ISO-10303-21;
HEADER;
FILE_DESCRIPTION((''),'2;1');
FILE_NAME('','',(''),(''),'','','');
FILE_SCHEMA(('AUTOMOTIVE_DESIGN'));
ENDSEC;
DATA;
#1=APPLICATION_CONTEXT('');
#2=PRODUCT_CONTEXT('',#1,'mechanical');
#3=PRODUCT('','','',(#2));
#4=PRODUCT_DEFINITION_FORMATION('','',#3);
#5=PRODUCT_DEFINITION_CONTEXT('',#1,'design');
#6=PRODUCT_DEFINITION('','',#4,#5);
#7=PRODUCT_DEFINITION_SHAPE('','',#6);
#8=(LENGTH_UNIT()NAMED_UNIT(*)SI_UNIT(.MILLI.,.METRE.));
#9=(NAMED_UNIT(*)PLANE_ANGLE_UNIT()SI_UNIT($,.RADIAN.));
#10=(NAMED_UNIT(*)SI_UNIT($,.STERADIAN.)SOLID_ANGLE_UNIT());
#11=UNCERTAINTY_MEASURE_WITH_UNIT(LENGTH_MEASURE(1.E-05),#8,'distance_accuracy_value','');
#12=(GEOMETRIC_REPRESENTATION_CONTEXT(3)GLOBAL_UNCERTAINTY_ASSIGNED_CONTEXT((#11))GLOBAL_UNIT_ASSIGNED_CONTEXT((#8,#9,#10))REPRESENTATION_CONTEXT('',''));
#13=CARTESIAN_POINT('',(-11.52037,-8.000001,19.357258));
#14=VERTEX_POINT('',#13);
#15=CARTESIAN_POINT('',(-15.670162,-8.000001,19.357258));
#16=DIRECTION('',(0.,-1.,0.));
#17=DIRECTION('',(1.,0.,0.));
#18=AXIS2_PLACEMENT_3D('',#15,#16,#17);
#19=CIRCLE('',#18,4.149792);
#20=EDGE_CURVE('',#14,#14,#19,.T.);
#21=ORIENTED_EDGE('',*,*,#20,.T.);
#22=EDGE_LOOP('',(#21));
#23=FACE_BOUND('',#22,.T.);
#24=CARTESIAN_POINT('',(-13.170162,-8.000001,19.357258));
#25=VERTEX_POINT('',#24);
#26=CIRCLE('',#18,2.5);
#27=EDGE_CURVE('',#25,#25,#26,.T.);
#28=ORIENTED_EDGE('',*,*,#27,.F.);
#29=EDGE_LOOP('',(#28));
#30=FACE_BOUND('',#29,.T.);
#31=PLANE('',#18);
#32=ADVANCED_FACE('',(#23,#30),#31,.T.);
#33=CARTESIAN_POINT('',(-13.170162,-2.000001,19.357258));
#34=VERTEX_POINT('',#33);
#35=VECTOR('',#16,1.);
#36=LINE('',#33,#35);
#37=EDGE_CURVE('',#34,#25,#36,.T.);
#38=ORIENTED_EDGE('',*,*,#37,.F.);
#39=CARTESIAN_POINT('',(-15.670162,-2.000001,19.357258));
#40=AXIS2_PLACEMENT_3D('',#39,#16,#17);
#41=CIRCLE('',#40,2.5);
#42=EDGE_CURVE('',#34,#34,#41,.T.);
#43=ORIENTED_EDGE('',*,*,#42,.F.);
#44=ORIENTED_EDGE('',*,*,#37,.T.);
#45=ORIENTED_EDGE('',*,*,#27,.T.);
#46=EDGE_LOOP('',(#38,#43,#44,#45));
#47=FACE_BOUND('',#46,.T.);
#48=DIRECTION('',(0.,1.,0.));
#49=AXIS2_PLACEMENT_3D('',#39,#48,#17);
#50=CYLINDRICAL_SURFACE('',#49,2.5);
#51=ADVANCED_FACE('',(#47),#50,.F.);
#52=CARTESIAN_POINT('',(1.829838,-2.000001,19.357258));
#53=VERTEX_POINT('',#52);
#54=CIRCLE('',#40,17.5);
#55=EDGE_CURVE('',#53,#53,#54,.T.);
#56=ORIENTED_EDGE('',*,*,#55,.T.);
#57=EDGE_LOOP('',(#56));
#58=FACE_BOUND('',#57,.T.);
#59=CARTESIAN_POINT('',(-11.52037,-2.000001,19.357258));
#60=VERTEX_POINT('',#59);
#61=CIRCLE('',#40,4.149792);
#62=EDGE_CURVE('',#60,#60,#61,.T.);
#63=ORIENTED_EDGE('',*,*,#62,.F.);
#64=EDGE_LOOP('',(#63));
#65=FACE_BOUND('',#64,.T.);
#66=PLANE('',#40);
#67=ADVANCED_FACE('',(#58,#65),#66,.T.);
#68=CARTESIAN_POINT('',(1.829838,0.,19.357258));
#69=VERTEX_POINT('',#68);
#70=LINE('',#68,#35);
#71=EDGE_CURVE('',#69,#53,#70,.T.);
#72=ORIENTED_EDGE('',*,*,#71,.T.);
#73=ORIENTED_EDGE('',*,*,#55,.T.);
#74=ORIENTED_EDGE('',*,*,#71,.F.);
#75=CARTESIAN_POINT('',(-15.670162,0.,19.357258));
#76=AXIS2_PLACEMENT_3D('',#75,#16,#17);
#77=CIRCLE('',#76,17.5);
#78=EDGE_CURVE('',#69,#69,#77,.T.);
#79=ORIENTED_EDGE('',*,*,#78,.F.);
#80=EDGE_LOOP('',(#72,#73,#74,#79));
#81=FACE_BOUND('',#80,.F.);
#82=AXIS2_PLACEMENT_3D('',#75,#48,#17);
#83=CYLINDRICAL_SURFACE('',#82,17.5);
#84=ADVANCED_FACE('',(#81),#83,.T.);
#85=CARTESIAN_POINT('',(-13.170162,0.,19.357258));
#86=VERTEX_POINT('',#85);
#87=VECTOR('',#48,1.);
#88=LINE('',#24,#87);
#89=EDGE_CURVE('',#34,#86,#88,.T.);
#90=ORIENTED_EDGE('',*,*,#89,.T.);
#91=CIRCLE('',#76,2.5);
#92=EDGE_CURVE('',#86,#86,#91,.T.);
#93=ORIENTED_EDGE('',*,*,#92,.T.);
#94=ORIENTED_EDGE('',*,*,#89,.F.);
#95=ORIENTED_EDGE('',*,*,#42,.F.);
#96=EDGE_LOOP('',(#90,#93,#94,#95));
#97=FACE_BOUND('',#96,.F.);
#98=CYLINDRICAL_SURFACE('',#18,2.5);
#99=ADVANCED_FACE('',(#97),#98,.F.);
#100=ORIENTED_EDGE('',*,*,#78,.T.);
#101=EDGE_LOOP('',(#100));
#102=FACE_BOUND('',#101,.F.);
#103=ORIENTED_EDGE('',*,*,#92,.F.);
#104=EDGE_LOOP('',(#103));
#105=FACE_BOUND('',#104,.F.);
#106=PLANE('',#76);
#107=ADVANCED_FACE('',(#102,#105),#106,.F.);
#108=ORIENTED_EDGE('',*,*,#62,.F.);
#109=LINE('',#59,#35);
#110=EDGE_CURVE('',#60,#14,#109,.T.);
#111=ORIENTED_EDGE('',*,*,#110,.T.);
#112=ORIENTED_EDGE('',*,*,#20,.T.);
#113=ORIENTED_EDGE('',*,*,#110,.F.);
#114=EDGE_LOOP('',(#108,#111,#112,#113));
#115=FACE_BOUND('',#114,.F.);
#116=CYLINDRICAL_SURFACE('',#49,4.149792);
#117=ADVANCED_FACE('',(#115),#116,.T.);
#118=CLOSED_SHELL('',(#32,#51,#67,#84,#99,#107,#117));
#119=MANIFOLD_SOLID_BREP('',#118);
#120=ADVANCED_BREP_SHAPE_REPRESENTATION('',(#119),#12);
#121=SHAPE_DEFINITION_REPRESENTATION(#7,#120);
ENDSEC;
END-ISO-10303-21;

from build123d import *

# Parameters (mm, degrees)
F0_R     = 17.5
F1_DEPTH = 2.00000108
F2_R     = 2.5
F3_DEPTH = 6
F6_DEPTH = 8.00100108
F7_R     = 4.1497915573
F7_R_2   = 2.5
F8_DEPTH = 6


# Not quite as in the source:
# - a feature of the source that left no trace in its solid (it failed there, or was rolled back) is left out
# - a feature names something its author has since deleted; it is built from what else it names
# - the program builds the solid bodies; features that only make, move or delete a surface that nothing else refers to are left out


with BuildPart() as f1:
    # F0 (on Front) → F1 (new body)
    with BuildSketch(Plane.XZ):
        with Locations((-15.6701616943, 19.357258454)):
            Circle(F0_R)
    extrude(amount=F1_DEPTH)

    # F2 (on face) → F3 (join)
    with BuildSketch(Plane.XZ.offset(2.00000108)):
        with Locations((-15.6701616943, 19.357258454)):
            Circle(F2_R)
    extrude(amount=F3_DEPTH)

    # F6 (cut, through all): a face of the model
    f6_faces = [f1.faces().sort_by_distance(p)[0] for p in [
        (-15.6701616943, -8.00000108, 19.357258454),
    ]]
    extrude(f6_faces, amount=-F6_DEPTH, mode=Mode.SUBTRACT)

    # F7 (on face) → F8 (join)
    with BuildSketch(Plane.XZ.offset(2.00000108)):
        with Locations((-15.6701616943, 19.357258454)):
            Circle(F7_R)
        with Locations((-15.6701616943, 19.357258454)):
            Circle(F7_R_2, mode=Mode.SUBTRACT)
    extrude(amount=F8_DEPTH)


solid = f1.part
